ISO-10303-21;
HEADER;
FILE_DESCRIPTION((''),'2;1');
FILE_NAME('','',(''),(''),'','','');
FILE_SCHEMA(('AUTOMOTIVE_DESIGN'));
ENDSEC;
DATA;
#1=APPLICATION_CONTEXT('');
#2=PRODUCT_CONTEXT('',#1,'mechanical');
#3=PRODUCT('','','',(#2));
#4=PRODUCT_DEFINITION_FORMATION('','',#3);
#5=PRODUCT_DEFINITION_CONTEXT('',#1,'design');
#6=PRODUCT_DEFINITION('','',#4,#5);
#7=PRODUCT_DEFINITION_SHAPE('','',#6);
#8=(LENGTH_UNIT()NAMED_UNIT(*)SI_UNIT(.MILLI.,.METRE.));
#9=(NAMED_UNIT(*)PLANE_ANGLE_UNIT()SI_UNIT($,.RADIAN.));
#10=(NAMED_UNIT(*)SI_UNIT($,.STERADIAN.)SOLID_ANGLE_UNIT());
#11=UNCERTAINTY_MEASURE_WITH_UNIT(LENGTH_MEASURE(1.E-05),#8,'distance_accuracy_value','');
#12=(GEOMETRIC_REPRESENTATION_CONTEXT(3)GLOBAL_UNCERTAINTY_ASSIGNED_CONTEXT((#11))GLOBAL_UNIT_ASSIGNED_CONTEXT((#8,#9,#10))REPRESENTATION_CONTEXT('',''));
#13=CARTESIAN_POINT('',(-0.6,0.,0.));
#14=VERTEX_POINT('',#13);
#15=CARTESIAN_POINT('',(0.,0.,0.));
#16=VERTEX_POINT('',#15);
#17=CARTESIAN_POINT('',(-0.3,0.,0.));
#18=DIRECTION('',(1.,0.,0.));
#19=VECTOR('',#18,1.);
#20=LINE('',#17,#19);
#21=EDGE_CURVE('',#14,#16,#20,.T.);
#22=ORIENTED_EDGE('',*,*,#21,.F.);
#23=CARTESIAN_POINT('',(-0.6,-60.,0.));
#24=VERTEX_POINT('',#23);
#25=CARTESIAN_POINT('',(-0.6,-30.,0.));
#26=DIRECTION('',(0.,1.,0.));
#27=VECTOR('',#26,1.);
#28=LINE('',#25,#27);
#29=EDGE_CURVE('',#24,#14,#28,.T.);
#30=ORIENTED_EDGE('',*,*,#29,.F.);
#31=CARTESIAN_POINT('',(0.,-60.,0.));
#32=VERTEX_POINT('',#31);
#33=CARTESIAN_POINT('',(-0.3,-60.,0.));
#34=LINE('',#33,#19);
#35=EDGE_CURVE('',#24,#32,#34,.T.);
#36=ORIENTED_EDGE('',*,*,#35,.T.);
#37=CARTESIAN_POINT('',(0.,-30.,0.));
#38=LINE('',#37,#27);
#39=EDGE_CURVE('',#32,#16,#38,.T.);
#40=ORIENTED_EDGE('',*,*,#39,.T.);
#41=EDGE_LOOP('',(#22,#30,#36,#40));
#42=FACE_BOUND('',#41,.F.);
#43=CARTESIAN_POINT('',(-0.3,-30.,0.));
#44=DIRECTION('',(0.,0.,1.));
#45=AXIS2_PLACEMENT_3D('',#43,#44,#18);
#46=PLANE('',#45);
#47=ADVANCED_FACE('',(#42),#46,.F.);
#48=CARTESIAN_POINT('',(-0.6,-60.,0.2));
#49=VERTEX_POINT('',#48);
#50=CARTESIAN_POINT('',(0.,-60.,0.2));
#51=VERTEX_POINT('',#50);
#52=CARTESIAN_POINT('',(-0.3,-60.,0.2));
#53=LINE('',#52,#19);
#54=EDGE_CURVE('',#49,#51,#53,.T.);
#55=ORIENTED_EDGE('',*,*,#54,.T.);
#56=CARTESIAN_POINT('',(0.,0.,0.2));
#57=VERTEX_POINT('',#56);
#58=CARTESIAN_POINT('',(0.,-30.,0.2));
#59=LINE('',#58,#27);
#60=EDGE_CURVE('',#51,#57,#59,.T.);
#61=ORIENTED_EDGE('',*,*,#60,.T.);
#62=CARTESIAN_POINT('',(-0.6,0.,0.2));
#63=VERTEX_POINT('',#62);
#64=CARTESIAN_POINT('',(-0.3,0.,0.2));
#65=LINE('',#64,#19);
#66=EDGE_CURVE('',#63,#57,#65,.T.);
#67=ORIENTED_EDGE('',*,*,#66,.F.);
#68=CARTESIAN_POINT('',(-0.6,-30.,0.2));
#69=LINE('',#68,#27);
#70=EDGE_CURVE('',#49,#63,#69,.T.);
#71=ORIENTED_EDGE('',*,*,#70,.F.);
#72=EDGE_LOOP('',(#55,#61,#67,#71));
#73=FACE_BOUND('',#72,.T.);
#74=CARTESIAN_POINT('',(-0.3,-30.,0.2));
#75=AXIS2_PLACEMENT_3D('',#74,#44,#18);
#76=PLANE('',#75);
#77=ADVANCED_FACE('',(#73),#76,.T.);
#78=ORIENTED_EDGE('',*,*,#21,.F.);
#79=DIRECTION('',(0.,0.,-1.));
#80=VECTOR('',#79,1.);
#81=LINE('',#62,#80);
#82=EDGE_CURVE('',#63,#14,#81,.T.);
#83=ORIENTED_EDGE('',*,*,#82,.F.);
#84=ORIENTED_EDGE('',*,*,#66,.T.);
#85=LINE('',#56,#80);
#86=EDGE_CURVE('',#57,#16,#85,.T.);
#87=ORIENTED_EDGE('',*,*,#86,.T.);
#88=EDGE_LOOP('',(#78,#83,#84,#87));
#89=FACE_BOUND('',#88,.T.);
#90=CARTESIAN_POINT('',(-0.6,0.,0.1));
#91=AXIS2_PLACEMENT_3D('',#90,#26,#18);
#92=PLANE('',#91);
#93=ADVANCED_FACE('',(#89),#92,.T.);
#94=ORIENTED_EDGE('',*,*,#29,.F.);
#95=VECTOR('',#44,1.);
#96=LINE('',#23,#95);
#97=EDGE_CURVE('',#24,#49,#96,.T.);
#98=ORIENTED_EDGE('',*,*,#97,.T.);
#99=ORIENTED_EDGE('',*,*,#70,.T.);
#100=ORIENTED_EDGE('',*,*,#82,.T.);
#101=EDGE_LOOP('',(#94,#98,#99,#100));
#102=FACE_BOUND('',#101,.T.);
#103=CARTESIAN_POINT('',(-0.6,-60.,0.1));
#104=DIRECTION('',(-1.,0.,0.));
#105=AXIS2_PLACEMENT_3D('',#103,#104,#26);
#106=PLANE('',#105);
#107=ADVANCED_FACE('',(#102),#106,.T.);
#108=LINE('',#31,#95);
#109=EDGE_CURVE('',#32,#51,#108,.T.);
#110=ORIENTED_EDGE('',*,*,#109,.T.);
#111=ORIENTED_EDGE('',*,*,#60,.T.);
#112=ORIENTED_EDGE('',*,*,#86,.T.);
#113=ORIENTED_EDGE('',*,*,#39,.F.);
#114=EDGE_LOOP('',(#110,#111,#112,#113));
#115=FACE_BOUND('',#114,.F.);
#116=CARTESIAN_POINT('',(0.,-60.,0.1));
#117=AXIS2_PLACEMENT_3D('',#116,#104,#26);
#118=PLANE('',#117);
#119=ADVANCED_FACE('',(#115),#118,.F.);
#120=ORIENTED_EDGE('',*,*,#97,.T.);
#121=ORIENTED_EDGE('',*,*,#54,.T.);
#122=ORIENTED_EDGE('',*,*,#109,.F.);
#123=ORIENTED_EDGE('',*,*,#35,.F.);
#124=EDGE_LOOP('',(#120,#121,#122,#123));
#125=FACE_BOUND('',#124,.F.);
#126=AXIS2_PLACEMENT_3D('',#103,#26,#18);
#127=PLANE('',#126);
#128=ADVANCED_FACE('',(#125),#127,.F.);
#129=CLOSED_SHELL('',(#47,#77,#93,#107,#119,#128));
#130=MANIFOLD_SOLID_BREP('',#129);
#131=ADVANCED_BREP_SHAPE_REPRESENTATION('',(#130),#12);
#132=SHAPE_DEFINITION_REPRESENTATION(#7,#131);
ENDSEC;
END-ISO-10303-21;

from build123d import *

# Parameters (mm, degrees)
F0_W     = 0.6
F0_H     = 60
F1_DEPTH = 0.1
F2_DEPTH = 0.1


# Not quite as in the source:
# - a feature names something its author has since deleted; it is built from what else it names


with BuildPart() as f1:
    # F0 (on Top) → F1 (new body)
    with BuildSketch(Plane.XY):
        with Locations((-0.3, -30)):
            Rectangle(F0_W, F0_H)
    extrude(amount=F1_DEPTH)

    # F2 (add): a face of the model
    f2_faces = [f1.faces().sort_by_distance(p)[0] for p in [
        (-0.3, -30, 0.1),
    ]]
    extrude(f2_faces, amount=F2_DEPTH)


solid = f1.part
